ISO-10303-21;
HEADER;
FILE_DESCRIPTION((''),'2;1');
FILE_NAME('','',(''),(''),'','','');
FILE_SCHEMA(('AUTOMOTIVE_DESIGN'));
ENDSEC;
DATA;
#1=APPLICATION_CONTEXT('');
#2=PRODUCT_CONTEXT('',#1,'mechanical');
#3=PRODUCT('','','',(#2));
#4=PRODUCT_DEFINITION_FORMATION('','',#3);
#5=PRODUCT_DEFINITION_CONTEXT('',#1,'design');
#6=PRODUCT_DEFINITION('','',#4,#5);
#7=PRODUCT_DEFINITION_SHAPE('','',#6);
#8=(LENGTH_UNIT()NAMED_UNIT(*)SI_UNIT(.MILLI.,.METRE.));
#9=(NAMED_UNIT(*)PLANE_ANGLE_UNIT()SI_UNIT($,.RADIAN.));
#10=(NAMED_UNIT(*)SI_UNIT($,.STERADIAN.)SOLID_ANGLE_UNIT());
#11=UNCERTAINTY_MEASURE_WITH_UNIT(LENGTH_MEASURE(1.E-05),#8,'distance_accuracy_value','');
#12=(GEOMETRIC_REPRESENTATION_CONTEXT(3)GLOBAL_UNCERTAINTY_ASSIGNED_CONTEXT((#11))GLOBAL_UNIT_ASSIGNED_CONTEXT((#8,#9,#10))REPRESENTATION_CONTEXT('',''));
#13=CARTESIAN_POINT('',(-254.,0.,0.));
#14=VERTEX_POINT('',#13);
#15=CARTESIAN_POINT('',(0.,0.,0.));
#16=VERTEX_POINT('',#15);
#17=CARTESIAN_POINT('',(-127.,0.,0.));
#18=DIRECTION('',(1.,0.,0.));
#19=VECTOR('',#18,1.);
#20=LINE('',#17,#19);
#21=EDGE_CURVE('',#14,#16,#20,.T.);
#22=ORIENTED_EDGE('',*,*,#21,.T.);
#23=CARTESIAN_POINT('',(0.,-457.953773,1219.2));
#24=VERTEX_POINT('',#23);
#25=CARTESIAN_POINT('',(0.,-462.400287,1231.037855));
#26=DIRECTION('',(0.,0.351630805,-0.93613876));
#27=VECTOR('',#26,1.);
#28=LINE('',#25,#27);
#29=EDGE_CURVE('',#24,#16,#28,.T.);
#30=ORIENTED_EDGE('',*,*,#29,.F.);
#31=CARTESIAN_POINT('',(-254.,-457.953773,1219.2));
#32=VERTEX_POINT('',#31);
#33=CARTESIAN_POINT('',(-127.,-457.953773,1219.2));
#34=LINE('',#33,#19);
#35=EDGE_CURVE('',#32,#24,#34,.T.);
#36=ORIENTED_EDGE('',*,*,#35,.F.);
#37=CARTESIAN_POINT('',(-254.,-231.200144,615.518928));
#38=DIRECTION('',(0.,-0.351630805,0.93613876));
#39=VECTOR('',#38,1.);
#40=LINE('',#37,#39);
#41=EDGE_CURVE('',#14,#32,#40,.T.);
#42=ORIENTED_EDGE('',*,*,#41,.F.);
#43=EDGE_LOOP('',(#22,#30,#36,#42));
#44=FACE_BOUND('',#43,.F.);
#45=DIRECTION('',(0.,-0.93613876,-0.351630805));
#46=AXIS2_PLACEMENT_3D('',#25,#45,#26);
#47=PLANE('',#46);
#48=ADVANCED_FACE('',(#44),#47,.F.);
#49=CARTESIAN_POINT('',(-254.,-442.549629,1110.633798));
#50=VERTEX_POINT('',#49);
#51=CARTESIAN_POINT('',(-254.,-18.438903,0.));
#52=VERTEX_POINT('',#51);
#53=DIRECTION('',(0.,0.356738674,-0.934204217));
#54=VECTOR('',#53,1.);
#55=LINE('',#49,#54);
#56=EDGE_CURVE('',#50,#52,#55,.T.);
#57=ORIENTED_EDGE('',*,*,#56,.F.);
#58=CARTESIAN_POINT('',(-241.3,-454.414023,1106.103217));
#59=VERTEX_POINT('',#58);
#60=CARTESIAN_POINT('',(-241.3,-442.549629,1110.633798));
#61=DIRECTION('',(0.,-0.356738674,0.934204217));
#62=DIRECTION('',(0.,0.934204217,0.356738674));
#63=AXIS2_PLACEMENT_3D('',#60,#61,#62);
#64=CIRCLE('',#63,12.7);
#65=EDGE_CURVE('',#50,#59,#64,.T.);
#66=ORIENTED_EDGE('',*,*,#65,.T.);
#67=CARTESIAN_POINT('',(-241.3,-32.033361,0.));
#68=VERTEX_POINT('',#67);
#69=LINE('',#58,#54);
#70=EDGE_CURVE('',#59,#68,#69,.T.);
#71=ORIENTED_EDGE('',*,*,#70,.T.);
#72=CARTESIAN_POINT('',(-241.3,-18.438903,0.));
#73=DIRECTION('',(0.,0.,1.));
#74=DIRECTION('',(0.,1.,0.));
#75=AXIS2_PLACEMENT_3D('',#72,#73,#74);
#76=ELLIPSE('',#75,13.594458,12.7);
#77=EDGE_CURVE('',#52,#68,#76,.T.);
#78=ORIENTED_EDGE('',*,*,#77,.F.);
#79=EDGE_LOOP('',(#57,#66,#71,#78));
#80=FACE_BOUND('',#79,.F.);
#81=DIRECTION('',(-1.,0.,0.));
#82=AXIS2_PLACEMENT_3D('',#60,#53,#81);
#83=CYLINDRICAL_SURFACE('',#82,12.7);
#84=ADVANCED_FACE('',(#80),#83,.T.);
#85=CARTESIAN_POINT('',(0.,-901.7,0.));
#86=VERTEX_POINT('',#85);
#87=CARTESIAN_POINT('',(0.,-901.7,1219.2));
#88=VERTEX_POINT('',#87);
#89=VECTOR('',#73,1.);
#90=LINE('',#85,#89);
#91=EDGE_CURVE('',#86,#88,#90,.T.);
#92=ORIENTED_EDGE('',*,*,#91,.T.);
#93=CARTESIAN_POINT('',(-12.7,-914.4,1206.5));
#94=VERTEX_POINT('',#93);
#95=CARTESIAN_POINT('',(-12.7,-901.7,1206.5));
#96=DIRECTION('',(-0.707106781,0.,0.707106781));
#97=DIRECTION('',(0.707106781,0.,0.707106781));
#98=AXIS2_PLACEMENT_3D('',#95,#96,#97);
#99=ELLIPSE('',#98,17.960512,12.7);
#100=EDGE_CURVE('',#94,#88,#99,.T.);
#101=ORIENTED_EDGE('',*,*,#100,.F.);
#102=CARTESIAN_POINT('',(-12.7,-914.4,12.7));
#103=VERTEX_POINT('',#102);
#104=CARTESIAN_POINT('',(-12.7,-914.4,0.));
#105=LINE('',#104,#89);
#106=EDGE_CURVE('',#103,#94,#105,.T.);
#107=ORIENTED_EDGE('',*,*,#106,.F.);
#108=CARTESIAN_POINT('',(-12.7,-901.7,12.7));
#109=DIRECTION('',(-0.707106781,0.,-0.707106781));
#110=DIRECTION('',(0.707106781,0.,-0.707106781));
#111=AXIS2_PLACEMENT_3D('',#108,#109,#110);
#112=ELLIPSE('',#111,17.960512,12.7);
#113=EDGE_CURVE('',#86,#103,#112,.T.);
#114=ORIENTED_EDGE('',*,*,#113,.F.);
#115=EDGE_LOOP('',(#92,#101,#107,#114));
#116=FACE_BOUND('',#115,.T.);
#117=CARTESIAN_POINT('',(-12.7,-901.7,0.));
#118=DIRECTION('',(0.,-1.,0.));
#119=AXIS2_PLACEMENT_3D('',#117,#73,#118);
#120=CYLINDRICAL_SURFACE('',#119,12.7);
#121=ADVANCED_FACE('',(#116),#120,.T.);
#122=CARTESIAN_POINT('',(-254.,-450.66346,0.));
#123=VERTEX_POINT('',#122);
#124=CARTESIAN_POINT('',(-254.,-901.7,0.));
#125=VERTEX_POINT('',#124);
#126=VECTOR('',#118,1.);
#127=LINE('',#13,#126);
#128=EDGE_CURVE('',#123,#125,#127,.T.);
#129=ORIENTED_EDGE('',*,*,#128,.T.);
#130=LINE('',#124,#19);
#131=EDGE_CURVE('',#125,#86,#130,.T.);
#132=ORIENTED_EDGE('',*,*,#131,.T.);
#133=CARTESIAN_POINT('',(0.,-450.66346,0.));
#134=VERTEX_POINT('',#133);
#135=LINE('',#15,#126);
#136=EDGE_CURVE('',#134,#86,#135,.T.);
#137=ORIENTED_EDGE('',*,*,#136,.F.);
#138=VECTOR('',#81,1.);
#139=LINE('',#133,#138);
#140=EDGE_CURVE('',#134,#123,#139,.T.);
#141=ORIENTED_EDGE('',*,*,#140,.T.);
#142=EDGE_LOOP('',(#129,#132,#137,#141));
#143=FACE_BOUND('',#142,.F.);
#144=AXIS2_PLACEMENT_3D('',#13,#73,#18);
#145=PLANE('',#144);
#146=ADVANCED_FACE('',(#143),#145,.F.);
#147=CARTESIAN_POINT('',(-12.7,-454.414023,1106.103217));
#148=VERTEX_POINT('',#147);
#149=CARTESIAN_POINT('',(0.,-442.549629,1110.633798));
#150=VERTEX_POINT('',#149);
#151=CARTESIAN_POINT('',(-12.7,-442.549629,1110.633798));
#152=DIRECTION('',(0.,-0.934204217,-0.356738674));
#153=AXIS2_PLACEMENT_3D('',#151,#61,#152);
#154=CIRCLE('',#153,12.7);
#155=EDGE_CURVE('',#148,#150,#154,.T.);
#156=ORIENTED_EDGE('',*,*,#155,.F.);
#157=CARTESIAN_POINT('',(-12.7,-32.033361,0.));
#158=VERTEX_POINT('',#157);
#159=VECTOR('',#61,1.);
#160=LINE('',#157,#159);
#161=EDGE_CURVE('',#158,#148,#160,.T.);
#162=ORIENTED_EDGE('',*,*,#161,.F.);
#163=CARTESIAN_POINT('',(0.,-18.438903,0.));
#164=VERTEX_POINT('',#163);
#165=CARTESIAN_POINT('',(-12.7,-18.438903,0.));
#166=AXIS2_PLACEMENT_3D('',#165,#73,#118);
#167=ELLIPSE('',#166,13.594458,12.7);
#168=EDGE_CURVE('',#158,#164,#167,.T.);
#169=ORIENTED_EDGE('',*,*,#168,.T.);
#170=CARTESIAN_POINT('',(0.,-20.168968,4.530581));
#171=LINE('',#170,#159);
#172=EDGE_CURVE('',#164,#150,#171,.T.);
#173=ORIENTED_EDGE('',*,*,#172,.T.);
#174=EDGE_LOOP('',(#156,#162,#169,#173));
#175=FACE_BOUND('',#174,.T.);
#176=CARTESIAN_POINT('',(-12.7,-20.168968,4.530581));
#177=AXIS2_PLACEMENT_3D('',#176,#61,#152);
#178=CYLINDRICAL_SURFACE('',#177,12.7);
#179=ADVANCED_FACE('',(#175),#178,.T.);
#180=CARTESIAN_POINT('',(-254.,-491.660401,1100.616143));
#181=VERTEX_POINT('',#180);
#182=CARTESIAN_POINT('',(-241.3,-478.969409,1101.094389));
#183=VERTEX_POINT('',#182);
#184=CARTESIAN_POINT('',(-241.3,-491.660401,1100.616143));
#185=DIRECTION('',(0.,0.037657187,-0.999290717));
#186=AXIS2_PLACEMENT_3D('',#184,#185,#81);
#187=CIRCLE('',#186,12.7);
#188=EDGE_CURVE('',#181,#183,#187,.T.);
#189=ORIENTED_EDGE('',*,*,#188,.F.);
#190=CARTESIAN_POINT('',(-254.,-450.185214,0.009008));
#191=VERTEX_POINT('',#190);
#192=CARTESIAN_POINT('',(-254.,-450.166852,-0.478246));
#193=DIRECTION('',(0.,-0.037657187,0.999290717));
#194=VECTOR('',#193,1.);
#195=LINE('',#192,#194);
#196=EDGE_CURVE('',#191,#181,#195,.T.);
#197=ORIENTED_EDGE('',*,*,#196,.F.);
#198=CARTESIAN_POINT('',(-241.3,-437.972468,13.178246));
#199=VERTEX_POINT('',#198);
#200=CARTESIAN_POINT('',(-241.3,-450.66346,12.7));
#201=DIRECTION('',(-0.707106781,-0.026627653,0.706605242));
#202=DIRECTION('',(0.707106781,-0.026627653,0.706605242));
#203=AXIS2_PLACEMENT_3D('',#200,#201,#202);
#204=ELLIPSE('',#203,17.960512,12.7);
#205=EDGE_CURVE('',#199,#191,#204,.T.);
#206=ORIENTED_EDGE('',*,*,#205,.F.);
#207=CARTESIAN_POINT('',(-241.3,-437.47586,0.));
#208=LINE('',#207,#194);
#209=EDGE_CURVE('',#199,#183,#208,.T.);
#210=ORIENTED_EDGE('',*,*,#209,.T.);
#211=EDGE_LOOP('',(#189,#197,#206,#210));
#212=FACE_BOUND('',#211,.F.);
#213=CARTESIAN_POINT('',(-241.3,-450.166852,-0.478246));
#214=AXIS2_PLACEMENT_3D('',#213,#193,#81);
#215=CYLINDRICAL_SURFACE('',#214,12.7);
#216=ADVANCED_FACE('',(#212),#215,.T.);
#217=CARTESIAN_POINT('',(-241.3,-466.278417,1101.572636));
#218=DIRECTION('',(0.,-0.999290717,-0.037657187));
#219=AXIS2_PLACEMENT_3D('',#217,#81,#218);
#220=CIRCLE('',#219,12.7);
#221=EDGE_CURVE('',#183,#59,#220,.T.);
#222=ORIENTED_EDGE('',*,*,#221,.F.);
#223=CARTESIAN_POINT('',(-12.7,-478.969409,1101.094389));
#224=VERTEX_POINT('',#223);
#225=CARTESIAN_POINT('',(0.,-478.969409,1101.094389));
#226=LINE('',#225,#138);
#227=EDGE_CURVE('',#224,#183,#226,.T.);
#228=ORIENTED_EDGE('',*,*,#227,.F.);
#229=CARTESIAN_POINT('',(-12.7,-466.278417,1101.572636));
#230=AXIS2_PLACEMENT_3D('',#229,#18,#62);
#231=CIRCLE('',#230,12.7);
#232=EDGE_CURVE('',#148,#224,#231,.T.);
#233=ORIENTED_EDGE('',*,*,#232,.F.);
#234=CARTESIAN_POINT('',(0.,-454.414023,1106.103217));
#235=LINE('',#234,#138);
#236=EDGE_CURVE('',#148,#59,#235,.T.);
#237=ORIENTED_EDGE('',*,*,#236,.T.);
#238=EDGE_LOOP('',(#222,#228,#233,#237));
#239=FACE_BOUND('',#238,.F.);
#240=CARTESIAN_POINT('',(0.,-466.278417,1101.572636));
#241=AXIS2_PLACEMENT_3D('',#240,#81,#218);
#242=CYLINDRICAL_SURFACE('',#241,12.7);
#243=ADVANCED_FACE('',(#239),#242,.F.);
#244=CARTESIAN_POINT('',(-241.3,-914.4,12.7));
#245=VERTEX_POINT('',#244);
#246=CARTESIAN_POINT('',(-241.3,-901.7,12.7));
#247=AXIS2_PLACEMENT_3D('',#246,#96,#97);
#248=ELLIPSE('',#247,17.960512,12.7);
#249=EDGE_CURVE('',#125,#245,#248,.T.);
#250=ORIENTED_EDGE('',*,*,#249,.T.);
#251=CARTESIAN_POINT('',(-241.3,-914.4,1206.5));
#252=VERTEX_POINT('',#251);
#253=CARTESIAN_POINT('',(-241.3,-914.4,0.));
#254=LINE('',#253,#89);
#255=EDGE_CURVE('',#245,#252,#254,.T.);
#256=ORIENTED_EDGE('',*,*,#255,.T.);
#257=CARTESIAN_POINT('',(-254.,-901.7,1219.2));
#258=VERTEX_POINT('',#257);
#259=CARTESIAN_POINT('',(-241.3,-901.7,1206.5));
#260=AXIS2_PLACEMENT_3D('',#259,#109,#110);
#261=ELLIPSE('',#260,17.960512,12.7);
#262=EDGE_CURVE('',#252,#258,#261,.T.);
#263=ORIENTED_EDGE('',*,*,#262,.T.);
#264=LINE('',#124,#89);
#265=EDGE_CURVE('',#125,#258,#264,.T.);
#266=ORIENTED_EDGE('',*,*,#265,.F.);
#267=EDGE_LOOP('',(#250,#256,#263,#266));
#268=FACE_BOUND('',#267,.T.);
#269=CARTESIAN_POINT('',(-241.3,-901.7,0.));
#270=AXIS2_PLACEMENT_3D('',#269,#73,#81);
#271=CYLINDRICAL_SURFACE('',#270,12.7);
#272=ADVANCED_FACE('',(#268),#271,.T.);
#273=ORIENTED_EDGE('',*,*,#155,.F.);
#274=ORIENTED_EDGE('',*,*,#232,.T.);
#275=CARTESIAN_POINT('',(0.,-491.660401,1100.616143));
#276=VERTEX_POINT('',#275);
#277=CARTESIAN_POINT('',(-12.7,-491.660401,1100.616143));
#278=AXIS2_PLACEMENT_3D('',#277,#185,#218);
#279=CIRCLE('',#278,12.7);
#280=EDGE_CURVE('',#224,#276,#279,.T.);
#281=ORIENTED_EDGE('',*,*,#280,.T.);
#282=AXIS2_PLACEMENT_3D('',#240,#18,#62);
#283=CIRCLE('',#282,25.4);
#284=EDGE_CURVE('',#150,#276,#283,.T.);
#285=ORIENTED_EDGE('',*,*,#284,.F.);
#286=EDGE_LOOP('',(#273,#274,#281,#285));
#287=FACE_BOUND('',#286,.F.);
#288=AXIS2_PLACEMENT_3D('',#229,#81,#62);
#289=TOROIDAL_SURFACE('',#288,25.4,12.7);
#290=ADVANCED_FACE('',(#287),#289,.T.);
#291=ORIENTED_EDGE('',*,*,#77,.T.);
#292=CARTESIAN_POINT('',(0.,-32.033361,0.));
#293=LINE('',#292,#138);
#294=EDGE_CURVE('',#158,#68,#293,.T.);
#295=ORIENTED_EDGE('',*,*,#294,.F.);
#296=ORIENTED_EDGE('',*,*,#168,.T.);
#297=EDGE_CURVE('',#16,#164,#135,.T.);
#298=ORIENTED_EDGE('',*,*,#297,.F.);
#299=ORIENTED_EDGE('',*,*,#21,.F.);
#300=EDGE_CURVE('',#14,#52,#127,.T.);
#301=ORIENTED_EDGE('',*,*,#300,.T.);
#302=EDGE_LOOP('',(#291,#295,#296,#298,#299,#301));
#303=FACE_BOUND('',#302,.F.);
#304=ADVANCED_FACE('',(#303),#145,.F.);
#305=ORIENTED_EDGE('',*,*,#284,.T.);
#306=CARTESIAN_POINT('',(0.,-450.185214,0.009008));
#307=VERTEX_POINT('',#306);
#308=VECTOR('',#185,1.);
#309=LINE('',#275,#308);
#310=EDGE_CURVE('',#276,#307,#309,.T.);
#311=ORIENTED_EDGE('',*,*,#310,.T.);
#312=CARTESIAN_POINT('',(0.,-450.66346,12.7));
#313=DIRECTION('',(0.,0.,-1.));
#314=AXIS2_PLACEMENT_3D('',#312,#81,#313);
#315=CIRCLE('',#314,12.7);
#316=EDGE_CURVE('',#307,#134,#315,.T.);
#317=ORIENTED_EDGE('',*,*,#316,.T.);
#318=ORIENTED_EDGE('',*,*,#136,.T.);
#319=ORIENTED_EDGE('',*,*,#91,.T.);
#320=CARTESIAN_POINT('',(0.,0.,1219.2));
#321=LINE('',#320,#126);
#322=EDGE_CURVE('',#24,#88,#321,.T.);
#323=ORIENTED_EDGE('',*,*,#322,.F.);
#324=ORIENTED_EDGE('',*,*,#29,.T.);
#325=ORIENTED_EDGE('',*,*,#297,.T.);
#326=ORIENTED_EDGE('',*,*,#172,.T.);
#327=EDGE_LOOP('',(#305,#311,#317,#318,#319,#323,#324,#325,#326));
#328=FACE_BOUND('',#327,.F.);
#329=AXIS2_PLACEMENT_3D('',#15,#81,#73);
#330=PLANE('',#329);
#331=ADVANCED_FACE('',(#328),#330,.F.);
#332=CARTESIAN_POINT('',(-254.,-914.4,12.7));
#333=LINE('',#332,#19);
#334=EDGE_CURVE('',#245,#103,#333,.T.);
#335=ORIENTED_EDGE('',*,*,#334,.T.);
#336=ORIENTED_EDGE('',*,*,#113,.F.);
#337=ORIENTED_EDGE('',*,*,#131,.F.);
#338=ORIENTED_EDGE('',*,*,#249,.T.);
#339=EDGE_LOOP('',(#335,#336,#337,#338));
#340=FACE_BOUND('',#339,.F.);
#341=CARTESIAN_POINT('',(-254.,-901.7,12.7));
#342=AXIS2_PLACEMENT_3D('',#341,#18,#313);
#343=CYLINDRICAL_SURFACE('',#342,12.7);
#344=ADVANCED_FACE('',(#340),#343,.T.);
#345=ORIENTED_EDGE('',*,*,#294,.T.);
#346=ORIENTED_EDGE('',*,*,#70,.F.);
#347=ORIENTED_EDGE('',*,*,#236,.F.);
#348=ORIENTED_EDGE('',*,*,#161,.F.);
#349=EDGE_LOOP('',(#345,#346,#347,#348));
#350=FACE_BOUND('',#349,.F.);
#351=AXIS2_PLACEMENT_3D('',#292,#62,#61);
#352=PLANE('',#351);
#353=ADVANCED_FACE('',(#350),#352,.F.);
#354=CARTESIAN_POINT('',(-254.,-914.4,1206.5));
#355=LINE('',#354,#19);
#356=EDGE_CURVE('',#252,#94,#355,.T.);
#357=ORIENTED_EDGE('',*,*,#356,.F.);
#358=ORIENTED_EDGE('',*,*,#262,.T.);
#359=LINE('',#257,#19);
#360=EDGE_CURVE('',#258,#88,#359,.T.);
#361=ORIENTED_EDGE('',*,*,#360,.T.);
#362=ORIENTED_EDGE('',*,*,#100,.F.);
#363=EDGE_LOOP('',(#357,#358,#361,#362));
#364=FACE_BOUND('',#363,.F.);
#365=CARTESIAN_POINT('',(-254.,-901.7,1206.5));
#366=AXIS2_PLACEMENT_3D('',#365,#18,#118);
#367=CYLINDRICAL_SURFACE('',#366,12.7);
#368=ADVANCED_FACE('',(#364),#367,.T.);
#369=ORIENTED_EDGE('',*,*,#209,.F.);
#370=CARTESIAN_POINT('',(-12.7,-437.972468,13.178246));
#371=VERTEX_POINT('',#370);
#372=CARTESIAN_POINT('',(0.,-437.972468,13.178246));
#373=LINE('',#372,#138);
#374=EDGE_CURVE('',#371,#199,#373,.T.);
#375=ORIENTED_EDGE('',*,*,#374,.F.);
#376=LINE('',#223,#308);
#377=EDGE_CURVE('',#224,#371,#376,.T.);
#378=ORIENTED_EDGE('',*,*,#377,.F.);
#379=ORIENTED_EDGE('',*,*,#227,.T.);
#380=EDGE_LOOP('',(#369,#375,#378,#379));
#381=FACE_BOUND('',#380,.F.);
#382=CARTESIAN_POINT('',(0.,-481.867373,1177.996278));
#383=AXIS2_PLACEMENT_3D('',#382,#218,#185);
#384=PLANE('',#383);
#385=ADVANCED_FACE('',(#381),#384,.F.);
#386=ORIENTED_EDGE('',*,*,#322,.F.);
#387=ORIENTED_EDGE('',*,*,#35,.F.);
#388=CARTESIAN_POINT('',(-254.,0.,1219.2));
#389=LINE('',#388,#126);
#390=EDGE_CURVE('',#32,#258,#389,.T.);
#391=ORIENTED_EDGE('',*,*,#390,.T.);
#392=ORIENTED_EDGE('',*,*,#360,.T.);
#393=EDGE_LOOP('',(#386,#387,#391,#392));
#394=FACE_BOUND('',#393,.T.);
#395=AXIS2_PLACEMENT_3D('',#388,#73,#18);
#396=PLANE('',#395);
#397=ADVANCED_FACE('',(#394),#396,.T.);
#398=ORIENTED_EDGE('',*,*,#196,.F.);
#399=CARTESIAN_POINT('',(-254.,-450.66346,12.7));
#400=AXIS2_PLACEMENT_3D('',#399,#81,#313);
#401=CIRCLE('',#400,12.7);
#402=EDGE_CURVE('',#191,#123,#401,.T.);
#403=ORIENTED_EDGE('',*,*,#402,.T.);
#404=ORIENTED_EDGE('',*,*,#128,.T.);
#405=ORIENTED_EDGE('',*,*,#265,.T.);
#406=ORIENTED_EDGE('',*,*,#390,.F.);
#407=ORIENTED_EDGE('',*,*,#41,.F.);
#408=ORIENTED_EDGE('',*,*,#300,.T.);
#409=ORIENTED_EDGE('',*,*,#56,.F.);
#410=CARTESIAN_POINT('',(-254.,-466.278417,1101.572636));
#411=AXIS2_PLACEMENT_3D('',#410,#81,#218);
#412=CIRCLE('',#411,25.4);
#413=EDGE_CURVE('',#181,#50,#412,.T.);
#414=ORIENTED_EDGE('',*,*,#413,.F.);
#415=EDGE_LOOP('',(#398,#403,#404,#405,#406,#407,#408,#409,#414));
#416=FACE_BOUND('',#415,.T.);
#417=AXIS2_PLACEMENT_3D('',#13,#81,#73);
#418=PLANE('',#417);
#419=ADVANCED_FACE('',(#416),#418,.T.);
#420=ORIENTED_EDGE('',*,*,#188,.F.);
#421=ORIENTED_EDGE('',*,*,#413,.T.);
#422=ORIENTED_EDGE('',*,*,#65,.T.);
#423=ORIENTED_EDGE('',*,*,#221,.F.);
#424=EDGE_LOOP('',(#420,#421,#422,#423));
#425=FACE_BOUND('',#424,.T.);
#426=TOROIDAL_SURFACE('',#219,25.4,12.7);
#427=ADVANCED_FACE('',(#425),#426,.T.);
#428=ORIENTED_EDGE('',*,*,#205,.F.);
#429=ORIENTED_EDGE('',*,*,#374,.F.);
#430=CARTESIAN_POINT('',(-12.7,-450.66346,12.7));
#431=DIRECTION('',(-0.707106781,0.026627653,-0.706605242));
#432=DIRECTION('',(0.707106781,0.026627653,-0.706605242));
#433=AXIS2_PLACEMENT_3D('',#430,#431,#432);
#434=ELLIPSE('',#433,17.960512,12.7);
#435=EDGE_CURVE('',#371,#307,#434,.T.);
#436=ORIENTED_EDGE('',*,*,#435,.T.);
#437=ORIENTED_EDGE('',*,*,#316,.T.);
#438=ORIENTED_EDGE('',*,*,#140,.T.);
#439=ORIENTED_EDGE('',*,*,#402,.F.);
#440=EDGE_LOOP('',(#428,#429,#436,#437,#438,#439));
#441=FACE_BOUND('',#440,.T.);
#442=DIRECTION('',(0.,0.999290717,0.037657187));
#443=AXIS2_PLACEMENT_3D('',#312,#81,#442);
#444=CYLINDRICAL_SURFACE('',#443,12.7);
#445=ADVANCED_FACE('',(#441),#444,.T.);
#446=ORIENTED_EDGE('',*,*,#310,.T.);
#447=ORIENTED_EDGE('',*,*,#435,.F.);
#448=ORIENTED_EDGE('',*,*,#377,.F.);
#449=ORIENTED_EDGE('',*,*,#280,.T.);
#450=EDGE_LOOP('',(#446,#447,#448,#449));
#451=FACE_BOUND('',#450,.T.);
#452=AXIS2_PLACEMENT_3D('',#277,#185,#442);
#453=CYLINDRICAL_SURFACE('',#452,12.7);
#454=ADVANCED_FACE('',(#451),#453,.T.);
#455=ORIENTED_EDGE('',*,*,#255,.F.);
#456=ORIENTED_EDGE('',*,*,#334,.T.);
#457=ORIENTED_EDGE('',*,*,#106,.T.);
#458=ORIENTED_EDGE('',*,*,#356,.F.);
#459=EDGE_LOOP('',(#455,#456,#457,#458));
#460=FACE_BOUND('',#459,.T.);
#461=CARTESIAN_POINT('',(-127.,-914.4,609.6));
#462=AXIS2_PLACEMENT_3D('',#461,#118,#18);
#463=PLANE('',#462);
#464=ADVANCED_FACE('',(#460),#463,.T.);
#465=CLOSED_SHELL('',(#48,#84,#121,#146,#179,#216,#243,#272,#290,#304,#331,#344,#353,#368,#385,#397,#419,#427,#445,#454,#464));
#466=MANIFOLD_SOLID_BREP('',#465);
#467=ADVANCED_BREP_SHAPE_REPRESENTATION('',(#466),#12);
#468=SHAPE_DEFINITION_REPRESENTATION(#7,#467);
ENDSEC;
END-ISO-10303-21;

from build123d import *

# Parameters (mm, degrees)
F0_W     = 254
F0_H     = 1219.2
F1_DEPTH = 914.4
F3_DEPTH = 254.001
F5_DEPTH = 254.001
F6_F1_R  = 12.7
F6_F2_R  = 12.7


with BuildPart() as f1:
    # F0 (on Front) → F1 (new body)
    with BuildSketch(Plane.XZ):
        with Locations((-127, 609.6)):
            Rectangle(F0_W, F0_H)
    extrude(amount=F1_DEPTH)

    # F2 (on Right) → F3 (cut, through all)
    with BuildSketch(Plane.YZ):
        Polygon((-462.4002873898, 1231.0378551483), (0, 0), (0, 1231.0378551483), align=None)
    extrude(amount=-F3_DEPTH, mode=Mode.SUBTRACT)

    # F4 (on Right) → F5 (cut, through all)
    with BuildSketch(Plane.YZ):
        Polygon((-437.4758601189, 0), (-32.0333614945, 0), (-481.8673729897, 1177.9962778091), align=None)
    extrude(amount=-F5_DEPTH, mode=Mode.SUBTRACT)

    # F6: fillet of radius 12.7 on 8 edges, made by hand

    # F6_f1
    f6_f1_edges = [f1.edges().sort_by_distance(p)[0] for p in [
        (-127, -481.8673729897, 1177.9962778091),
    ]]
    fillet(f6_f1_edges, radius=F6_F1_R)

    # F6_f2
    f6_f2_edges = [f1.edges().sort_by_distance(p)[0] for p in [
        (-127, -914.4, 0),
        (0, -914.4, 609.6),
        (-127, -914.4, 1219.2),
        (-254, -914.4, 609.6),
        (0, -458.2226343973, 550.5471946336),
        (-127, -437.4758601189, 0),
        (-254, -458.2226343973, 550.5471946336),
        (-254, -468.8167042617, 1114.0163928436),
        (0, -468.8167042617, 1114.0163928436),
    ]]
    fillet(f6_f2_edges, radius=F6_F2_R)


solid = f1.part
